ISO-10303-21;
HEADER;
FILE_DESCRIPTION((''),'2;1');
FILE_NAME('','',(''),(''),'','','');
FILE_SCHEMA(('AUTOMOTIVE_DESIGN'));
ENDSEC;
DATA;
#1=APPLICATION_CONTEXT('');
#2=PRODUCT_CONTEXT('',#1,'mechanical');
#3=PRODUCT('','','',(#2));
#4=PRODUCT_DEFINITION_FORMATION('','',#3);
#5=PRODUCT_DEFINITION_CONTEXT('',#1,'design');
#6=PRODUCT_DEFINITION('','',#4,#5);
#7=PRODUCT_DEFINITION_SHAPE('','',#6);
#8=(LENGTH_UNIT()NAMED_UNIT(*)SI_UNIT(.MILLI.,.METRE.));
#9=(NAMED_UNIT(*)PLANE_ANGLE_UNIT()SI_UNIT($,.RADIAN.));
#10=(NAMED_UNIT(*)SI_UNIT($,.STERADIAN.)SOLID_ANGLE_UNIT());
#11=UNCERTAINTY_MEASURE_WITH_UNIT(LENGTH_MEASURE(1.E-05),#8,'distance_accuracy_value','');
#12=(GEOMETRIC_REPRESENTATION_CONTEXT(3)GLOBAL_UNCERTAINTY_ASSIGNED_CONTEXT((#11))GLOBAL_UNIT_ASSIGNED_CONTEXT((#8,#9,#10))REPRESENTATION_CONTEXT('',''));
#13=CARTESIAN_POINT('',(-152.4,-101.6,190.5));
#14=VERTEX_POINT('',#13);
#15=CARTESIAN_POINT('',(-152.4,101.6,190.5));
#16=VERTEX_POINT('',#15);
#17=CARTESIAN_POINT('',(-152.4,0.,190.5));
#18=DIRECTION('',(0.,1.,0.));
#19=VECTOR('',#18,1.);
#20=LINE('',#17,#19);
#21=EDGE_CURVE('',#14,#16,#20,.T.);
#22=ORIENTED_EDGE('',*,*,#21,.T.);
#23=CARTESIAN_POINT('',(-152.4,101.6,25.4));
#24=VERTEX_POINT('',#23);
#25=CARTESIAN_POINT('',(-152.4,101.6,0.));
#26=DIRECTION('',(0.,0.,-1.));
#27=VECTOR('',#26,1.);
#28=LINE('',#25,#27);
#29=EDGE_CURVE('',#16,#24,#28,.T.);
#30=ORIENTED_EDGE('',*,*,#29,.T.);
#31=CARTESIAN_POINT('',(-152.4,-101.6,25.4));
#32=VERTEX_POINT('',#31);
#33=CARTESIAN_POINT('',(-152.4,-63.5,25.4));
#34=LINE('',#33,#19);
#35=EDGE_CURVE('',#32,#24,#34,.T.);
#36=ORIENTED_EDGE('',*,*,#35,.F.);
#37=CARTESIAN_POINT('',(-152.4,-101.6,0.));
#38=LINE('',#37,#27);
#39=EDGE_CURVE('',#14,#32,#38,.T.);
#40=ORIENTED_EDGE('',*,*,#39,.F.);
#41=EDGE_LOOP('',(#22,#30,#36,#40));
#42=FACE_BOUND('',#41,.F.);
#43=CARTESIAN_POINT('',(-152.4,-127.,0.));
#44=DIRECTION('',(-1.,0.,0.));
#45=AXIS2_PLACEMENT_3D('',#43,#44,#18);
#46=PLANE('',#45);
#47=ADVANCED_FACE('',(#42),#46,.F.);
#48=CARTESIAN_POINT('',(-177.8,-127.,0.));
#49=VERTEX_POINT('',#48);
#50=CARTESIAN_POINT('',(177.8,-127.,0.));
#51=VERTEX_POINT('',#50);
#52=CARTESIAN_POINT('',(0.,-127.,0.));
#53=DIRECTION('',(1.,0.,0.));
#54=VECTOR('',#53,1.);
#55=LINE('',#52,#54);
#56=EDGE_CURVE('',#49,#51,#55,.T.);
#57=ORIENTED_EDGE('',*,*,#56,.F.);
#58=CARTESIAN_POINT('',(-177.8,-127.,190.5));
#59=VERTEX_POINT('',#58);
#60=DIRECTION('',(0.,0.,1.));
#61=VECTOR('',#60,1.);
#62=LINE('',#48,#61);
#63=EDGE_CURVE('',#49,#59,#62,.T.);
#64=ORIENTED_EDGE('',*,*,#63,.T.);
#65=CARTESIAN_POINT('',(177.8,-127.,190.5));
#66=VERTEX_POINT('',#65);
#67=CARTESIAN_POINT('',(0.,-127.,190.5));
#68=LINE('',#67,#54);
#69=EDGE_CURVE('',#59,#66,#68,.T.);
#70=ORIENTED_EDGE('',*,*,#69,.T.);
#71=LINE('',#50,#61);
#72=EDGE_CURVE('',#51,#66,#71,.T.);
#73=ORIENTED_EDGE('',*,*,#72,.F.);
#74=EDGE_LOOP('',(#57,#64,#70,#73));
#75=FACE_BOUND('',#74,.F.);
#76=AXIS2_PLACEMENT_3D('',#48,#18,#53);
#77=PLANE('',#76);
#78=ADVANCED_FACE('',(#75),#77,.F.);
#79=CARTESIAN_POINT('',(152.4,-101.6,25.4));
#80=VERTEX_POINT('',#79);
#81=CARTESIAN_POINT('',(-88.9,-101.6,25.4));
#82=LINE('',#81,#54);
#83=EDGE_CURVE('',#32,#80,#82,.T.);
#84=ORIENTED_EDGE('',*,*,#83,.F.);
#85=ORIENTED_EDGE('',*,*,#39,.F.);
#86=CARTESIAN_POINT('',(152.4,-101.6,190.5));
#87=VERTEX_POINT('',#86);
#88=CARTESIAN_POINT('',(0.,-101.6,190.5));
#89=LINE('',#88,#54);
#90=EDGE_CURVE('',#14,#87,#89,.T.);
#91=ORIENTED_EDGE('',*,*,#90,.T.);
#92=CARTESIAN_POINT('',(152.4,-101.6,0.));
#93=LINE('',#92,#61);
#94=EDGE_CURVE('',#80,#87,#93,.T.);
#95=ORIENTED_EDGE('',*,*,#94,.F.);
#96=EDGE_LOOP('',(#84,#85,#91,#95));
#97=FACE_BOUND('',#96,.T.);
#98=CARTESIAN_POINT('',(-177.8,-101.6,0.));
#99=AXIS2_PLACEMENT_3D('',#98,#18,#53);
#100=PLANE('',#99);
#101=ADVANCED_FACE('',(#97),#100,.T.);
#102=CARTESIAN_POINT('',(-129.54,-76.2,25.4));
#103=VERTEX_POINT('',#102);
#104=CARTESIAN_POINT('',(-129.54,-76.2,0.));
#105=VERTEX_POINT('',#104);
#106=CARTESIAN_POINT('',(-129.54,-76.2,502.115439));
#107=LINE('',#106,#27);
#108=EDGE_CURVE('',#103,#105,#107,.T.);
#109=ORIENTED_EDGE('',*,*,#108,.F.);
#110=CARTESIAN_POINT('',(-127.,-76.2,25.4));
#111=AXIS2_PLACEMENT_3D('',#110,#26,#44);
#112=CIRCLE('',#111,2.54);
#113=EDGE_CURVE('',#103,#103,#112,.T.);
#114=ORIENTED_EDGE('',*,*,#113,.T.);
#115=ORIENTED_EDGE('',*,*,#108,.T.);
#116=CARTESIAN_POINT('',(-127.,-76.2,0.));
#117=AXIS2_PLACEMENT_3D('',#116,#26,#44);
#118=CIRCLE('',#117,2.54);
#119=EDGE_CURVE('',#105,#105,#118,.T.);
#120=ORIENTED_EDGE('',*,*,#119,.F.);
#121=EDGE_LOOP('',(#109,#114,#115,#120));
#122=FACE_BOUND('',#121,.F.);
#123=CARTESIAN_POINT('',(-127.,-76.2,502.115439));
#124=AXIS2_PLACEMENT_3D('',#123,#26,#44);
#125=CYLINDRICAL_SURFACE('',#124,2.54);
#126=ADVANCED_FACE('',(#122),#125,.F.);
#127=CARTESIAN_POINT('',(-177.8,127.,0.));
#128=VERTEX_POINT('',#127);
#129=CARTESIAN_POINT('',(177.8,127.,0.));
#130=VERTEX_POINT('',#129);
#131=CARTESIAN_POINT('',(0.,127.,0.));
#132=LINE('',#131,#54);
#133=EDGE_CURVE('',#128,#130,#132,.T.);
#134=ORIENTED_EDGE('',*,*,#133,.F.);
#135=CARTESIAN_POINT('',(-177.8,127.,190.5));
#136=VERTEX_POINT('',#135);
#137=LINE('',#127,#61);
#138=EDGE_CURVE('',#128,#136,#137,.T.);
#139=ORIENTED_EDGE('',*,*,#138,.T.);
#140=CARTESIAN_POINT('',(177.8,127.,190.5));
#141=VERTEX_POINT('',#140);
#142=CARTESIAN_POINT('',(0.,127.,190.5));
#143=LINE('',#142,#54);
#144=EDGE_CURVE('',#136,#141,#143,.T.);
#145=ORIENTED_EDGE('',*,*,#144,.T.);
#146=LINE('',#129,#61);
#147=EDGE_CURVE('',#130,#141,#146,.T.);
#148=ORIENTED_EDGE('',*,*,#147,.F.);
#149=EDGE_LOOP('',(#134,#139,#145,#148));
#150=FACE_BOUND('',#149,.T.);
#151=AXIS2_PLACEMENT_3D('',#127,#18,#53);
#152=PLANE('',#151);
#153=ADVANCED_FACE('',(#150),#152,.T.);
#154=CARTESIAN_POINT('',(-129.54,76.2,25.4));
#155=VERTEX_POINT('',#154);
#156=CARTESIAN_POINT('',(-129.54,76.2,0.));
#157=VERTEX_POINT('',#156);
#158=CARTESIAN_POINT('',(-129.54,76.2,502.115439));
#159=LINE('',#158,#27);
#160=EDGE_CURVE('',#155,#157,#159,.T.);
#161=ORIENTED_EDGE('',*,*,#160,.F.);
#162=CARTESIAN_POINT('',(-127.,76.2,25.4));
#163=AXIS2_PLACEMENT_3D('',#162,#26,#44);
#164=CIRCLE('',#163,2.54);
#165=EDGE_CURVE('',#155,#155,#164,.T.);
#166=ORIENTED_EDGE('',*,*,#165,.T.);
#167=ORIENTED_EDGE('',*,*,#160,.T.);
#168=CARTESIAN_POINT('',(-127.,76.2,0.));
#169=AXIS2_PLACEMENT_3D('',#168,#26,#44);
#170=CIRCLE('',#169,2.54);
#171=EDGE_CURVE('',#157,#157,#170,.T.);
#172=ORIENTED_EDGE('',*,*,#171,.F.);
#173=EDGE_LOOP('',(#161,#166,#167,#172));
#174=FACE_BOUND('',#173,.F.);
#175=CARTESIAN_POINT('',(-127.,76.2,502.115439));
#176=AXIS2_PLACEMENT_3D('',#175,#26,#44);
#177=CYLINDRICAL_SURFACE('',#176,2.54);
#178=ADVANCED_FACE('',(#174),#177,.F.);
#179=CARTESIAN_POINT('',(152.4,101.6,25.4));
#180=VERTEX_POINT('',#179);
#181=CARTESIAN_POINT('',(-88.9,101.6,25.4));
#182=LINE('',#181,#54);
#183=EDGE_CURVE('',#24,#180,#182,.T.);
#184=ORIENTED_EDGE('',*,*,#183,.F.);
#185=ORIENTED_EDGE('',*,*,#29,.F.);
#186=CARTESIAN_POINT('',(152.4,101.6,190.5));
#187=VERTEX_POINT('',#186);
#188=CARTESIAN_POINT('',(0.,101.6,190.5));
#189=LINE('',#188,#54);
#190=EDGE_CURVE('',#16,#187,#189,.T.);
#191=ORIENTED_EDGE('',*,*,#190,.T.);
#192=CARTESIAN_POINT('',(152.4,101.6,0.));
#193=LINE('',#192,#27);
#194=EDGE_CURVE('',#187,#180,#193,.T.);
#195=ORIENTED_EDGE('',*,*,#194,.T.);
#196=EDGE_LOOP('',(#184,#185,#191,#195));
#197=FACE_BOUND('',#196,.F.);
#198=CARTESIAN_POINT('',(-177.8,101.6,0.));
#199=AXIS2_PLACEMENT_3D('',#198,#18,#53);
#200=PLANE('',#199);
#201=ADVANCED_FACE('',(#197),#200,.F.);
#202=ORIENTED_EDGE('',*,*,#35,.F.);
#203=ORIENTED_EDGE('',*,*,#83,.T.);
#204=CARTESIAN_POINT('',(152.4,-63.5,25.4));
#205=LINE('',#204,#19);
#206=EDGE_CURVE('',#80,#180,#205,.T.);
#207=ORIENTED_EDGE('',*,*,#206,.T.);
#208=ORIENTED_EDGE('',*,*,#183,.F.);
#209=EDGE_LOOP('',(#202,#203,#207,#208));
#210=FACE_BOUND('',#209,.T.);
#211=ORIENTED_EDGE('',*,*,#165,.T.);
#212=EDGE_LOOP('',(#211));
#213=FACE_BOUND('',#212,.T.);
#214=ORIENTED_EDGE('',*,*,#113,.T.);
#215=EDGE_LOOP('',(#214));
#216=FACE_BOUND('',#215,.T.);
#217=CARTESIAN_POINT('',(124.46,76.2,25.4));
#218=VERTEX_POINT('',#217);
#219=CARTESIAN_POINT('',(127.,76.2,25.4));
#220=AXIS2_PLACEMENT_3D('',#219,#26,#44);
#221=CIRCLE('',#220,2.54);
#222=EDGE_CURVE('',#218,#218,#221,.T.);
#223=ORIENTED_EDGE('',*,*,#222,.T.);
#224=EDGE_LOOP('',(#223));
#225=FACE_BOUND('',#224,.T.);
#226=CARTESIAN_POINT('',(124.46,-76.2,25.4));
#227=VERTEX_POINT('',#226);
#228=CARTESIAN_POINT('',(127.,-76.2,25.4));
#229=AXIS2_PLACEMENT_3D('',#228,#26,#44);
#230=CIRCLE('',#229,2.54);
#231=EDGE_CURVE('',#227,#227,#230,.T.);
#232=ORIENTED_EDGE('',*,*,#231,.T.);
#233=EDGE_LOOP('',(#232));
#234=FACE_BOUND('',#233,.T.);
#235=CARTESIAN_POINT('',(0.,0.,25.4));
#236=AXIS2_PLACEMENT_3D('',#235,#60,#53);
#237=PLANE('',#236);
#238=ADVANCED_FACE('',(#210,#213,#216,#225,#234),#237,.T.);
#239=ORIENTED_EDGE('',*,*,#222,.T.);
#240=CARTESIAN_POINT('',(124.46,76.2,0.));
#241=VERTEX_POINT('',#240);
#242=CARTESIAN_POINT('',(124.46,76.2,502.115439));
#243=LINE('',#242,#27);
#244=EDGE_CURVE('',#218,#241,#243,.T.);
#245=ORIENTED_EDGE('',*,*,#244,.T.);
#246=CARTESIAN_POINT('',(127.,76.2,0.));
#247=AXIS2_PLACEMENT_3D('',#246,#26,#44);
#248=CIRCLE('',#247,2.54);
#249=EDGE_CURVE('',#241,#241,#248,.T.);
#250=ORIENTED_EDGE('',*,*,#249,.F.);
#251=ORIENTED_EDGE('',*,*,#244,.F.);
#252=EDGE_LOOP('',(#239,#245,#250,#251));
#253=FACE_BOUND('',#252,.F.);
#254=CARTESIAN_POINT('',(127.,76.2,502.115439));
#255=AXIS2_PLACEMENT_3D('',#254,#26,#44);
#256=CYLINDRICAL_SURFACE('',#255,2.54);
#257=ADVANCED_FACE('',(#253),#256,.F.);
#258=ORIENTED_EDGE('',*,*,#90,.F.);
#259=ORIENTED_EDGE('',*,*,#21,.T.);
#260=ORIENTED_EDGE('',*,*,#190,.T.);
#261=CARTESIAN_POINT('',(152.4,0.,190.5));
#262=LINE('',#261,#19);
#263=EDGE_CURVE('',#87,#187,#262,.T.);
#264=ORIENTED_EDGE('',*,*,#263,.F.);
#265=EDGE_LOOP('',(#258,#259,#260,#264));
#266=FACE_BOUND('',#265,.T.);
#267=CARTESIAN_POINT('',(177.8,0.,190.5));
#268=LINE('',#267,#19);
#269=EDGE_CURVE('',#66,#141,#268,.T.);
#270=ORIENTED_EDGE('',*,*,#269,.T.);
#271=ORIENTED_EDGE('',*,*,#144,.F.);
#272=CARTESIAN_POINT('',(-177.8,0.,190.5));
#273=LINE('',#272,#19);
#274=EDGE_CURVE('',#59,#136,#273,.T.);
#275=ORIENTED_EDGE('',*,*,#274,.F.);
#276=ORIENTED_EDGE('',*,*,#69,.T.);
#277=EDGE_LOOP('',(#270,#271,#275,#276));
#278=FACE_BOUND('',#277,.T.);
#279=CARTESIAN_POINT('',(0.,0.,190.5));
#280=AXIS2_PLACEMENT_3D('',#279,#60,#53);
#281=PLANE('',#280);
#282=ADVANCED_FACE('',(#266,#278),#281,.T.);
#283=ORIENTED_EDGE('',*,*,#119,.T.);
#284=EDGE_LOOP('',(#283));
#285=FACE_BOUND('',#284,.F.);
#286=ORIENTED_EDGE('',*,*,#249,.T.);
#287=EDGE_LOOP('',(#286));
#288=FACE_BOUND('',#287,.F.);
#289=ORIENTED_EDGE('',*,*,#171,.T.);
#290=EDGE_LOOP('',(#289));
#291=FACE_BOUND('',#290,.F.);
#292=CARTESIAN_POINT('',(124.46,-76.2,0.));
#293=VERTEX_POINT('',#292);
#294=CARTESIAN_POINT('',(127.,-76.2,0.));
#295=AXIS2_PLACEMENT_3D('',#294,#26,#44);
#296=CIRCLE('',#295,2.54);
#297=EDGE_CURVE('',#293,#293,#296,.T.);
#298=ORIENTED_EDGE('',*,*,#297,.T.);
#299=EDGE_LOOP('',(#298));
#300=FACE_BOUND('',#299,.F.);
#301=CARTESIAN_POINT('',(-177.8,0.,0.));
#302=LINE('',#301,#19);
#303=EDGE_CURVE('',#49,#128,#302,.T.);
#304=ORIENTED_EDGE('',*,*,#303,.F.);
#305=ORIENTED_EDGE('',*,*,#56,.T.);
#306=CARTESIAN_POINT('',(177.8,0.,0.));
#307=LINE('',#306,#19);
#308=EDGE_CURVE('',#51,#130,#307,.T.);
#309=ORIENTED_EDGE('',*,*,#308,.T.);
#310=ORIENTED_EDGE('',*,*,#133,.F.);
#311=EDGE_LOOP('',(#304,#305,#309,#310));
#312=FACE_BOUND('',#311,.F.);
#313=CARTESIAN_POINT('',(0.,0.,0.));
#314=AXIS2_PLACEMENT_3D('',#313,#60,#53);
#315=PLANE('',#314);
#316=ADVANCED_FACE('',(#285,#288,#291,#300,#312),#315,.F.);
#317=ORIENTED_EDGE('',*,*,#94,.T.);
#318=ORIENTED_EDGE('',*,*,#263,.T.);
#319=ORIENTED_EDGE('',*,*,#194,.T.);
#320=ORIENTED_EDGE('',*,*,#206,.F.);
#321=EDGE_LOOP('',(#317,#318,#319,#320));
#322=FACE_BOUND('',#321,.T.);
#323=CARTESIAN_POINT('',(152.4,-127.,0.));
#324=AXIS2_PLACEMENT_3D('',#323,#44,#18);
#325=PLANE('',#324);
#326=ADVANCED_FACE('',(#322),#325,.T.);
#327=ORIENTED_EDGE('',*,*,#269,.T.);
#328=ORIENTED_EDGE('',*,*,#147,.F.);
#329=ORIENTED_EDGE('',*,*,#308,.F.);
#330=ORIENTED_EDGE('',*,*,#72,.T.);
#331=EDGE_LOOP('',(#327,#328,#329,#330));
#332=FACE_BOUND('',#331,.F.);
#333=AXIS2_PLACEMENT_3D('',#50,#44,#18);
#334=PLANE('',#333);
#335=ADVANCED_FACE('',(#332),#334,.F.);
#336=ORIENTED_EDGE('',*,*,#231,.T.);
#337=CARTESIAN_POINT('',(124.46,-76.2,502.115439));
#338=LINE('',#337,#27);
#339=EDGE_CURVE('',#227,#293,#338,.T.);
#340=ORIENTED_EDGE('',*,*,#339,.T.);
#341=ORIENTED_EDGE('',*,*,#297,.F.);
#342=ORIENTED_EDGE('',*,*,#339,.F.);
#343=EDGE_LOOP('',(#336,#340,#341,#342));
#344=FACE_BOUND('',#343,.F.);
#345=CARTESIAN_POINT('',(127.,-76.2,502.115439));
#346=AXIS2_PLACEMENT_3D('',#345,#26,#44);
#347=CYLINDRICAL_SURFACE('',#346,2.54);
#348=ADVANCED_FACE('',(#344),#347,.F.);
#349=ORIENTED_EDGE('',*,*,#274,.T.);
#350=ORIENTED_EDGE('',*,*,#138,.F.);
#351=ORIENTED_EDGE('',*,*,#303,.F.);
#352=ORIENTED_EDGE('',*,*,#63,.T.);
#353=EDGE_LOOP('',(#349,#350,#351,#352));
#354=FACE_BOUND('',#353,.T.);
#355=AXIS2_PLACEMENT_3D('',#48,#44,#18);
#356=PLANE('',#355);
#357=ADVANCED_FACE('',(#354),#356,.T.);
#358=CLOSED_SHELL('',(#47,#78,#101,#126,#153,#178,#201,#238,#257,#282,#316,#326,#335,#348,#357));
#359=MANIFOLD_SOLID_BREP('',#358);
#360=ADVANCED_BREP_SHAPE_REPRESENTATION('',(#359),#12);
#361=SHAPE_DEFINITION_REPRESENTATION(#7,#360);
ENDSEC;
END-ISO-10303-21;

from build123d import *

# Parameters (mm, degrees)
F0_W     = 355.6
F0_H     = 254
F1_DEPTH = 190.5
F2_T     = -25.4
F4_D     = 5.08


with BuildPart() as f1:
    # F0 (on Top) → F1 (new body)
    with BuildSketch(Plane.XY):
        Rectangle(F0_W, F0_H)
    extrude(amount=F1_DEPTH)

    # F2
    f2_openings = [f1.faces().sort_by_distance(p)[0] for p in [
        (0, 0, 190.5),
    ]]
    offset(amount=F2_T, openings=f2_openings)

    # F4 (through all)
    with Locations(Plane.XY.offset(25.4)):
        with Locations((-127, 76.2), (-127, -76.2), (127, -76.2), (127, 76.2)):
            Hole(F4_D / 2)


solid = f1.part
